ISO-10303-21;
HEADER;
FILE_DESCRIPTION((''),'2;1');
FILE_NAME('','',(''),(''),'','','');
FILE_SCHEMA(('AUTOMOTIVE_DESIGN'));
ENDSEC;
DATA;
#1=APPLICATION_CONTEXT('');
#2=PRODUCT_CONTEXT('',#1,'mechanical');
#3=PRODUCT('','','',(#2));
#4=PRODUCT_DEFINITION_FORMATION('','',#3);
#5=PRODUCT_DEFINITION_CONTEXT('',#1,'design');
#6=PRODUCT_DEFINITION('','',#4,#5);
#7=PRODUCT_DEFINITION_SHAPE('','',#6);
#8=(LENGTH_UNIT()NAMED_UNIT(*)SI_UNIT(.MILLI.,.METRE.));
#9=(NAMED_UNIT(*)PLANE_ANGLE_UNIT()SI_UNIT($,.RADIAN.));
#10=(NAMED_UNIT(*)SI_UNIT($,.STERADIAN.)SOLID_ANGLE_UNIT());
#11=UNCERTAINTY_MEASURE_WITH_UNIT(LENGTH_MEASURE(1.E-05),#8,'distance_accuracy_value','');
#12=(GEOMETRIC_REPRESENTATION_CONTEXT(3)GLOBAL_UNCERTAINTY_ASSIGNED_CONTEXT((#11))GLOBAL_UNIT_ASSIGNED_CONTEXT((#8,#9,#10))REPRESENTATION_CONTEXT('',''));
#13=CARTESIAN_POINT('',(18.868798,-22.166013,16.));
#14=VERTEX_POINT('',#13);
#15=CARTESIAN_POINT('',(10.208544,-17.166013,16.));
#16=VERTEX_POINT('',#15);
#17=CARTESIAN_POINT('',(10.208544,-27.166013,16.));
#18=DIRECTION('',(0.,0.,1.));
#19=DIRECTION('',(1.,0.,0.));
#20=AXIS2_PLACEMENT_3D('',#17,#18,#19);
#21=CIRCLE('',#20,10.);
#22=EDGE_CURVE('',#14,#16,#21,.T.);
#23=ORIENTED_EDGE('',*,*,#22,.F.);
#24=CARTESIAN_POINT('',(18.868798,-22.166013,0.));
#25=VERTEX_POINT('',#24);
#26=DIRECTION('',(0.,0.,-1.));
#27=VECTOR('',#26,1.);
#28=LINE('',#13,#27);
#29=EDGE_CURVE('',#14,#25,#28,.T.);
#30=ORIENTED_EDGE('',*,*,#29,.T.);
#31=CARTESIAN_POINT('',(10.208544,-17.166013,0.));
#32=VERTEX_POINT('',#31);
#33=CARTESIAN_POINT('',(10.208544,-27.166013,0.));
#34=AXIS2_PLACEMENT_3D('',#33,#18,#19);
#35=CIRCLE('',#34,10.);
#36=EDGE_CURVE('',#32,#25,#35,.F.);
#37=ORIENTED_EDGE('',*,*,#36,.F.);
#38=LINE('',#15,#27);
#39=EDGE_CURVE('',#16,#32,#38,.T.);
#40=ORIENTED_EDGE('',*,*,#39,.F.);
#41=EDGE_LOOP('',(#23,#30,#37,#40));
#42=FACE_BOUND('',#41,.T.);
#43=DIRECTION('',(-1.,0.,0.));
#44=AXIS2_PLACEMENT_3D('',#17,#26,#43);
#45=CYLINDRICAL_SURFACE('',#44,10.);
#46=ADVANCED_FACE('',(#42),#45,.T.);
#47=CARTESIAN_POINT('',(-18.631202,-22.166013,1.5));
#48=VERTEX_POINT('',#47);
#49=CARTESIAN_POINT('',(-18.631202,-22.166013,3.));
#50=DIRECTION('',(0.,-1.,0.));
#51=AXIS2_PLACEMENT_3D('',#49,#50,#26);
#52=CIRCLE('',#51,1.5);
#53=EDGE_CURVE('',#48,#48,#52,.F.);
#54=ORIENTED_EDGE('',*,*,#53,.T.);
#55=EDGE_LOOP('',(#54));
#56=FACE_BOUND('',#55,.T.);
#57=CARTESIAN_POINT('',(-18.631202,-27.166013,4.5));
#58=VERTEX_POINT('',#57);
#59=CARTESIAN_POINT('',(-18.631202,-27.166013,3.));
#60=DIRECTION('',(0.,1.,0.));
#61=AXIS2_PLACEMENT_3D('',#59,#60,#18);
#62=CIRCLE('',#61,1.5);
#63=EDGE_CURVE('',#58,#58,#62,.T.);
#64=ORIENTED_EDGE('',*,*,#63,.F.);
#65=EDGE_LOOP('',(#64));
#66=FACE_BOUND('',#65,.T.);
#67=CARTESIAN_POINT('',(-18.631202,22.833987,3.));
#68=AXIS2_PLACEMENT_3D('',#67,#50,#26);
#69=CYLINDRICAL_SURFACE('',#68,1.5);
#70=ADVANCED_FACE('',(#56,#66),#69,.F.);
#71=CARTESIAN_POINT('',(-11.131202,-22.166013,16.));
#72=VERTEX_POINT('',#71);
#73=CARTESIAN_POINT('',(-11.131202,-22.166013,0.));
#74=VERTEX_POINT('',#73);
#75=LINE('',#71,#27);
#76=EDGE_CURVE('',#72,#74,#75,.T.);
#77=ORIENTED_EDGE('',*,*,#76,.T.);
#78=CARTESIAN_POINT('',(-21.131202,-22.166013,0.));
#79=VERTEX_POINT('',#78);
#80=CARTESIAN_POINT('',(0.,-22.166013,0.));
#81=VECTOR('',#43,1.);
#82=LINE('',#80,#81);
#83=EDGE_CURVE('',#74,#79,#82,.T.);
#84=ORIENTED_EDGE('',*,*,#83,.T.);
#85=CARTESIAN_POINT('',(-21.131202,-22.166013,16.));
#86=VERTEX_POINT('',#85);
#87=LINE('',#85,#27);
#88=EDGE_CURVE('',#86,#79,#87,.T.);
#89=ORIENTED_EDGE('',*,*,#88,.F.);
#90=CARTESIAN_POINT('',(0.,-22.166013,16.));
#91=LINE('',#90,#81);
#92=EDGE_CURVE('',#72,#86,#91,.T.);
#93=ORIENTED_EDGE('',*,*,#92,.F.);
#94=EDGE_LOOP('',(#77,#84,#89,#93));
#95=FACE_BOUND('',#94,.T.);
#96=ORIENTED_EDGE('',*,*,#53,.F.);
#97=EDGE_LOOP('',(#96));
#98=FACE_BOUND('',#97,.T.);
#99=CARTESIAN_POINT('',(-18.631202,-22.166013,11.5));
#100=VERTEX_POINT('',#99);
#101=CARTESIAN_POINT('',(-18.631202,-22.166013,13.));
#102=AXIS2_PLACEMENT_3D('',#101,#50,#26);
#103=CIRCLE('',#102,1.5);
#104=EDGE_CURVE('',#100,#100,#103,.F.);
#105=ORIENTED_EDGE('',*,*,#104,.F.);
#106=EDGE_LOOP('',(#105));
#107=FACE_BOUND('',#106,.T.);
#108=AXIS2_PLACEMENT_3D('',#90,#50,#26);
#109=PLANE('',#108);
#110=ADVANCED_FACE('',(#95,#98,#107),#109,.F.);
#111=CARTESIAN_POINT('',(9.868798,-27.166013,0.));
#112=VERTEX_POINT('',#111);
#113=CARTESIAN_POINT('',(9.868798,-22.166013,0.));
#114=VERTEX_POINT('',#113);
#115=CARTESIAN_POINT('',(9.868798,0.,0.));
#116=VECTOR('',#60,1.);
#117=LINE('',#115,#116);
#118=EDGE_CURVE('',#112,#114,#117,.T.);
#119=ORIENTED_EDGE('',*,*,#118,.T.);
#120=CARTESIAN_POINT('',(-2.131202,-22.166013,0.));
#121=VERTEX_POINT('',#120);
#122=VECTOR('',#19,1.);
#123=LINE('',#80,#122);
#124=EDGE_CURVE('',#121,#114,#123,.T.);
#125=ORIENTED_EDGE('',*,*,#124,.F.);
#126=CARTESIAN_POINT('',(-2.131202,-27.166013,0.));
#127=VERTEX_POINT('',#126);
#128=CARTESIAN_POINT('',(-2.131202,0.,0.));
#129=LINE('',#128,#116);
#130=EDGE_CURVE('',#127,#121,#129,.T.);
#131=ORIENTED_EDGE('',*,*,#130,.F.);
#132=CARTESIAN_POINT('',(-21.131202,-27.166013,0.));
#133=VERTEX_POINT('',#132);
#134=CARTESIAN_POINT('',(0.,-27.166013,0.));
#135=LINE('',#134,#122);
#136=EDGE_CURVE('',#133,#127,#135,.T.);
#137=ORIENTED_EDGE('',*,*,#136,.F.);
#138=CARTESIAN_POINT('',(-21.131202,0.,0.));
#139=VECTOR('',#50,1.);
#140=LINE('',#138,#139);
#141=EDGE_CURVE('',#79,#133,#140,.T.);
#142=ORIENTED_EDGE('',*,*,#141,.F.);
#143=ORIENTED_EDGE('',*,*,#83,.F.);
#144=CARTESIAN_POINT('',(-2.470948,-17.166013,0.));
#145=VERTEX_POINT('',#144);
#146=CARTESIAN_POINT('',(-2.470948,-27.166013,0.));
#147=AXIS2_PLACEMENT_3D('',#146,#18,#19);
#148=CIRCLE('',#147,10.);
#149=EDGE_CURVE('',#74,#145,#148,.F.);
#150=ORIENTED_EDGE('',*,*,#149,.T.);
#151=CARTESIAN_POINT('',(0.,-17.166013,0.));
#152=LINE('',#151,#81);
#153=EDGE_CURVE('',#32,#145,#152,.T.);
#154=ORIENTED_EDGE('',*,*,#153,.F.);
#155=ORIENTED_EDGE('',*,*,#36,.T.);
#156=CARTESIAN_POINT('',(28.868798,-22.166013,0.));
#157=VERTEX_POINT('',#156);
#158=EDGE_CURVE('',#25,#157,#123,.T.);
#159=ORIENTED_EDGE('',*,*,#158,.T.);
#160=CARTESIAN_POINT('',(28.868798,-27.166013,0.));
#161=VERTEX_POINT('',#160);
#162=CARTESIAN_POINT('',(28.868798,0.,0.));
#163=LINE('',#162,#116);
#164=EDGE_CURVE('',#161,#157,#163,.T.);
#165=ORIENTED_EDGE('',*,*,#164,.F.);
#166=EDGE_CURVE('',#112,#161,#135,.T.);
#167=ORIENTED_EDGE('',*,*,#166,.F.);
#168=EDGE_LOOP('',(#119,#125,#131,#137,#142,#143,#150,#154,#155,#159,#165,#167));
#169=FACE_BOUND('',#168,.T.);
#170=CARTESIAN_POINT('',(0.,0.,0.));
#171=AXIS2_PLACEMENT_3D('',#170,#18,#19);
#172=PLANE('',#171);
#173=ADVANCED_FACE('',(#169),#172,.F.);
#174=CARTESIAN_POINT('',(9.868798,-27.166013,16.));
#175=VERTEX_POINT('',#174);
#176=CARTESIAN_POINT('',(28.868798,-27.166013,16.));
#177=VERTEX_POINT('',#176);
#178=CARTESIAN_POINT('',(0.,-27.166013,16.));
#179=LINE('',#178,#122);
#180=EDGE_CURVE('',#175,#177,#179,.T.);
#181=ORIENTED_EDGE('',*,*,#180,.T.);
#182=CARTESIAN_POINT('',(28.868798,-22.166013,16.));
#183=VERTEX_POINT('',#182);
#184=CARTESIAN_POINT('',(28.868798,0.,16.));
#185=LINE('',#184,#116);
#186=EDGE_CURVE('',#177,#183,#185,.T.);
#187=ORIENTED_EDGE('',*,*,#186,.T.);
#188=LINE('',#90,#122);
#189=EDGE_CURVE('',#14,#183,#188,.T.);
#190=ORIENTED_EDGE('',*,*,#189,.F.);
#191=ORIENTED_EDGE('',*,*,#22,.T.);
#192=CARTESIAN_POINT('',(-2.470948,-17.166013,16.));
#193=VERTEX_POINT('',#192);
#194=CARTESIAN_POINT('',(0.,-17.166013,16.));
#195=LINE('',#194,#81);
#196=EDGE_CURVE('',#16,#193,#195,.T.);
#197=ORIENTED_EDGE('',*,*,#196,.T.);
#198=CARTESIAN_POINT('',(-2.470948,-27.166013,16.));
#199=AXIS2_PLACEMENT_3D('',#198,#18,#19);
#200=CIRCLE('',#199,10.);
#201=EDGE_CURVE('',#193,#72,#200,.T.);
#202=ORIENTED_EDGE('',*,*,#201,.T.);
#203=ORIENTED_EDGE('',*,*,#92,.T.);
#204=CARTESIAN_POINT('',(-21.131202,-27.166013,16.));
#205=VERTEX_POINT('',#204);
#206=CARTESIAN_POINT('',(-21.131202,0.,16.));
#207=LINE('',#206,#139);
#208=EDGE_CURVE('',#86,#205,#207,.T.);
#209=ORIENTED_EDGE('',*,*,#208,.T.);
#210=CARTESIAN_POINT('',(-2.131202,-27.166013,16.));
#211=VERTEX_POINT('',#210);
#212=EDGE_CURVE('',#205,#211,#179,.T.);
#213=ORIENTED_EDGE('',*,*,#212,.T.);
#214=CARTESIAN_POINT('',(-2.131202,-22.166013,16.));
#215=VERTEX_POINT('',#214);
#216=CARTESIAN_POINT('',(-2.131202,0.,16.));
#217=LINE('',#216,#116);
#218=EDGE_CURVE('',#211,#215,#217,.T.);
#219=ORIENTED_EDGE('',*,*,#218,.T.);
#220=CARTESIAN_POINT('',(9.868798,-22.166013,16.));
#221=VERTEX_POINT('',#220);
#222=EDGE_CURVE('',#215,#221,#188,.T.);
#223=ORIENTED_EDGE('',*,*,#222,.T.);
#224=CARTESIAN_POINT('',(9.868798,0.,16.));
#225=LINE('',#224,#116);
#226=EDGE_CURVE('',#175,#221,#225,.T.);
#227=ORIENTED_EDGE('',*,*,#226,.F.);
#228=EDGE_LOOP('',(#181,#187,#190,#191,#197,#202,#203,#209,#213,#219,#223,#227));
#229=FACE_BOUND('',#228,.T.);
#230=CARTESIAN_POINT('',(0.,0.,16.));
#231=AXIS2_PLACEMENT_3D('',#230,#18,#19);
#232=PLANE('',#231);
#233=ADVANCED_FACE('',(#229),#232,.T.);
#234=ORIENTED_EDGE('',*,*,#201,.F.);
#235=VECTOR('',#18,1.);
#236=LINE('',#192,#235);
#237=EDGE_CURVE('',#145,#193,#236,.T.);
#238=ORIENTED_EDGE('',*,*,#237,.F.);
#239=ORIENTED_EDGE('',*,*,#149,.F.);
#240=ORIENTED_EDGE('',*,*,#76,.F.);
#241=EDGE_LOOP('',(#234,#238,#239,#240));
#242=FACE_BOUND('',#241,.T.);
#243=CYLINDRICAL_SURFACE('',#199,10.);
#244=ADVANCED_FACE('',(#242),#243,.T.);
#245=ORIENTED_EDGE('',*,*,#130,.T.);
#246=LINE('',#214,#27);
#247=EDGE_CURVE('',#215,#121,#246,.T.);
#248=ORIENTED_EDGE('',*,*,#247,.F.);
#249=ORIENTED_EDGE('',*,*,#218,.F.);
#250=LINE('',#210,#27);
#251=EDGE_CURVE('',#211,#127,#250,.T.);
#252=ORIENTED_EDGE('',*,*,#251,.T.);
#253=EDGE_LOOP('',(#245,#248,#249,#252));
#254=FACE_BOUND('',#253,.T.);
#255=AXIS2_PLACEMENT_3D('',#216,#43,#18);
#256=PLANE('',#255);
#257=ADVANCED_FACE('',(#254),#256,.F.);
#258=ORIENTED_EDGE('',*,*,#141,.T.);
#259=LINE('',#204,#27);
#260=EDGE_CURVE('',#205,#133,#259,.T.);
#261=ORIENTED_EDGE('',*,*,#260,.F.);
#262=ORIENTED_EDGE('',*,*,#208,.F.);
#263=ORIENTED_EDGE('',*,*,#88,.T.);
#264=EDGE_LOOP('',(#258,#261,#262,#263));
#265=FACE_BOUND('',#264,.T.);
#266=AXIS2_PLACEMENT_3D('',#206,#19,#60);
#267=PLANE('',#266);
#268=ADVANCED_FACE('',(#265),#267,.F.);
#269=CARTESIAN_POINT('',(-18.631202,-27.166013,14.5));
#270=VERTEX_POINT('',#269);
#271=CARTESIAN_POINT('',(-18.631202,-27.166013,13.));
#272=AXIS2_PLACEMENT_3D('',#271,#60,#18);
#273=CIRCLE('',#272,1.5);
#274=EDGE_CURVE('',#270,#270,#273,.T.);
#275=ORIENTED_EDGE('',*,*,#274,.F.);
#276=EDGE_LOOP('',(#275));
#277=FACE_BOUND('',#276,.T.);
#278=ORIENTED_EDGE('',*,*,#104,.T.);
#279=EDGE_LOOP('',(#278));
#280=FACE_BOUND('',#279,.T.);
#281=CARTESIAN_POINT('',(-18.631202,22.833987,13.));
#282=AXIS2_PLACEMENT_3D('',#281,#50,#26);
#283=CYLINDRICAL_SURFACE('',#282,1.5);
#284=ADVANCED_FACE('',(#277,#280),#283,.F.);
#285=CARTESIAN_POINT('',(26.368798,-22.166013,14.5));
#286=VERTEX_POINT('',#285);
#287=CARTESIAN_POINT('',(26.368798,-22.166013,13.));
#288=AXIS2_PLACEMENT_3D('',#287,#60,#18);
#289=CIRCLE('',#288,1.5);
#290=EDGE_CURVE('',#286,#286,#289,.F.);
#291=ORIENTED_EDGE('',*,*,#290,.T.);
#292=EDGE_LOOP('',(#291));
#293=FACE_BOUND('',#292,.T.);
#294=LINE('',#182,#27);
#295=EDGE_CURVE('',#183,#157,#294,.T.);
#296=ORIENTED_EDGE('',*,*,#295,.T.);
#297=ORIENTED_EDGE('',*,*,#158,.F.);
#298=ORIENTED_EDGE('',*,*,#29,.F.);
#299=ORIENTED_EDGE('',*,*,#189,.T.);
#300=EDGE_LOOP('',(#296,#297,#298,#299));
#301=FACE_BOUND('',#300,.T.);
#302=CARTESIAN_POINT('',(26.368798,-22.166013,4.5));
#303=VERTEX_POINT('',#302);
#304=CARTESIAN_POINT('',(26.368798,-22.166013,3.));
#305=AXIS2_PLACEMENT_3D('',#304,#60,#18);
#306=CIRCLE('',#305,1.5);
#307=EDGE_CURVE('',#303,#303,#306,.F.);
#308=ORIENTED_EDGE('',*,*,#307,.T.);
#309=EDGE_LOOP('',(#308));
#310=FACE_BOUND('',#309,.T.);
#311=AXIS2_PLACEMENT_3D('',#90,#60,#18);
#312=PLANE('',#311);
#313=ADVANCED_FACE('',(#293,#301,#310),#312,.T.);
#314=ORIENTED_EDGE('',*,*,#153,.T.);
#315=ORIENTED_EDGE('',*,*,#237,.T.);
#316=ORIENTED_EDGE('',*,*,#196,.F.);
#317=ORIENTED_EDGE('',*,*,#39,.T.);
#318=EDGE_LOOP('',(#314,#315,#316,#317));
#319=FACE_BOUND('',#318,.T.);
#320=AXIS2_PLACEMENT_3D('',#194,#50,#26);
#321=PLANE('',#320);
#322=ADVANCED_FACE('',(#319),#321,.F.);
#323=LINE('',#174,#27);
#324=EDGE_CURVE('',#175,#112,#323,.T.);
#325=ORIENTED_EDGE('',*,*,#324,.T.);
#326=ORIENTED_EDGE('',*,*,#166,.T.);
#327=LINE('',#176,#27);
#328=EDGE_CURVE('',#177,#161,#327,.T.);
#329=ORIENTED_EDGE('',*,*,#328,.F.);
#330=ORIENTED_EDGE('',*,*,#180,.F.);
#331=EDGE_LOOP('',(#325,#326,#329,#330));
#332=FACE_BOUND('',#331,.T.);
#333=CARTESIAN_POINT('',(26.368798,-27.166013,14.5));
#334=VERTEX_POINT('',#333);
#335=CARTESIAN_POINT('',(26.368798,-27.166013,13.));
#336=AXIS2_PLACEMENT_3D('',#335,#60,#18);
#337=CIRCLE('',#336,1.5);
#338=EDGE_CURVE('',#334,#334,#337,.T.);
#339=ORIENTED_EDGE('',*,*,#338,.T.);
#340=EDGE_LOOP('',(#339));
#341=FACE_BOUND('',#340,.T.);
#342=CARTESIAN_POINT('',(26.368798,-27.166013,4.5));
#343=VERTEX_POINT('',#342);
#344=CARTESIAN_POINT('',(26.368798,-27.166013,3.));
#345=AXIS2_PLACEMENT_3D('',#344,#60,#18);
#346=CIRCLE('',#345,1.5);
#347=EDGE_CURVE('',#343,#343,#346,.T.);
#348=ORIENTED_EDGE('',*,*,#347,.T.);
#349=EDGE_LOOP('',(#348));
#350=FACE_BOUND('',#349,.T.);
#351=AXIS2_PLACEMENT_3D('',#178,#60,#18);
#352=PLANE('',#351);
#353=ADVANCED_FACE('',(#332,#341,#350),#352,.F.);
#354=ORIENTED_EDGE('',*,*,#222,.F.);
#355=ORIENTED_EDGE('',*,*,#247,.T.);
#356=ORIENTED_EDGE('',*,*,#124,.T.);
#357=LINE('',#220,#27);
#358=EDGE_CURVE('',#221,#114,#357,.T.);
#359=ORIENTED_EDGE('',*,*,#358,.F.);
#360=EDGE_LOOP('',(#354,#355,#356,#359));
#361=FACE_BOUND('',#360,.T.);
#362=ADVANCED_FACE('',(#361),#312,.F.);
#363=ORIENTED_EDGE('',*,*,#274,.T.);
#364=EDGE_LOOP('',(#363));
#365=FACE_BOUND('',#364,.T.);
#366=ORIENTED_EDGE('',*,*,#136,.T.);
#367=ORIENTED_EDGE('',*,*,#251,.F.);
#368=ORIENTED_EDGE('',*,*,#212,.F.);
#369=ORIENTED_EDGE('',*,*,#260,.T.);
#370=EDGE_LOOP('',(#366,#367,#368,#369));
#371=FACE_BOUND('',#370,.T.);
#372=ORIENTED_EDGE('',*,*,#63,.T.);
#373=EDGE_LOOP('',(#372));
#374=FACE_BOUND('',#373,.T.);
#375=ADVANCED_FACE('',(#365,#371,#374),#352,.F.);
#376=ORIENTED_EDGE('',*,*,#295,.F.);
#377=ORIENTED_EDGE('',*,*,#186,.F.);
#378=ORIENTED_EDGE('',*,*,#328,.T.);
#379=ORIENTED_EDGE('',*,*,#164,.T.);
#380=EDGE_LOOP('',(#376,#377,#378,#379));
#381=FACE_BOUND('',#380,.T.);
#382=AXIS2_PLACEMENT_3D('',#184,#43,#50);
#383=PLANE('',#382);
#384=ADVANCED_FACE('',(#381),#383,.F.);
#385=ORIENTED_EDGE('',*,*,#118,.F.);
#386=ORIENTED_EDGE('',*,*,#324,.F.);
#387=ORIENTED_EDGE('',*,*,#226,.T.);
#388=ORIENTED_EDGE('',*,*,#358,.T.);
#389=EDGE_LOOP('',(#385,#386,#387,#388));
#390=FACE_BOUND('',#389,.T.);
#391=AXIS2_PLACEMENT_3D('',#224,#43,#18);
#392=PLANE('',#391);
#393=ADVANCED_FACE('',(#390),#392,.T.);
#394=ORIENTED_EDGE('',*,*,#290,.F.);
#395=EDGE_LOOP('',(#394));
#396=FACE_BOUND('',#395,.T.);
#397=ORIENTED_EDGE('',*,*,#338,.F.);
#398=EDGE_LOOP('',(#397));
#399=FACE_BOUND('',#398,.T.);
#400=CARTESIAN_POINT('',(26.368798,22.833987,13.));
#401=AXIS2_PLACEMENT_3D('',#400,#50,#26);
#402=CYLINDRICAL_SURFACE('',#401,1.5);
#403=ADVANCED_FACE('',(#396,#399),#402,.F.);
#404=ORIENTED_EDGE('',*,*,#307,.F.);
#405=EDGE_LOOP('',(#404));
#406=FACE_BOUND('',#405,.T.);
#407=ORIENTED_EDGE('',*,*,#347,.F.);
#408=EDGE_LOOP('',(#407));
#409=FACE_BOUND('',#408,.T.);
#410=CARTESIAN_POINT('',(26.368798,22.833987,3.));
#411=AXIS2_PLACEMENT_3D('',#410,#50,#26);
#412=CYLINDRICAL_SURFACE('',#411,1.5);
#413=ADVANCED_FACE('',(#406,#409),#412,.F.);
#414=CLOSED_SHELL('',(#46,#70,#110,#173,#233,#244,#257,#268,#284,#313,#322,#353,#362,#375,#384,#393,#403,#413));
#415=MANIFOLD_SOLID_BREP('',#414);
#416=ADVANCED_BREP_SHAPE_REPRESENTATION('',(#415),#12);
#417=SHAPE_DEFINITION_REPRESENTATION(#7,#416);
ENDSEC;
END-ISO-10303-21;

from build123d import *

# Parameters (mm, degrees)
BOSS_EXTRUDE1_DEPTH = 16
SKETCH14_R          = 1.5
CUT_EXTRUDE13_DEPTH = 50
FILLET1_R           = 10


with BuildPart() as part:
    # Sketch7 → Boss-Extrude1 (new body)
    with BuildSketch(Plane.XY):
        Polygon((9.868798372, -27.16601268), (9.868798372, -22.16601268), (-2.131201628, -22.16601268), (-2.131201628, -27.16601268), (-8.131201628, -27.16601268), (-21.131201628, -27.16601268), (-21.131201628, -22.16601268), (-11.131201628, -22.16601268), (-11.131201628, -17.16601268), (18.868798372, -17.16601268), (18.868798372, -22.16601268), (28.868798372, -22.16601268), (28.868798372, -27.16601268), (15.868798372, -27.16601268), align=None)
    extrude(amount=BOSS_EXTRUDE1_DEPTH)

    # Sketch14 → Cut-Extrude13 (cut)
    with BuildSketch(Plane(origin=(0, -27.16601268, 0), x_dir=(1, 0, 0), z_dir=(0, 1, 0))):
        with Locations(Location((-18.631201628, -3, 0), (0, 0, 90))):
            Circle(SKETCH14_R)
        with Locations(Location((-18.631201628, -13, 0), (0, 0, 90))):
            Circle(SKETCH14_R)
        with Locations(Location((26.368798372, -3, 0), (0, 0, 270))):
            Circle(SKETCH14_R)
        with Locations(Location((26.368798372, -13, 0), (0, 0, 270))):
            Circle(SKETCH14_R)
    extrude(amount=CUT_EXTRUDE13_DEPTH, mode=Mode.SUBTRACT)

    # Fillet1
    # the kernel refuses this fillet: 10 mm, written as the material it takes off along each edge
    with BuildSketch(Plane(origin=(-11.131201628, -17.16601268, -21.650635095), x_dir=(0, -1, 0), z_dir=(0, 0, 1))) as fillet1_piece_1:
        with BuildLine():
            CenterArc((10, 8.660254038), FILLET1_R, 180, 60)
            Line((0, 8.660254038), (-0.2, 8.660254038))
            Line((-0.2, 8.660254038), (-0.2, 0))
            Line((-0.2, 0), (0, -0.2))
            ThreePointArc((0, -0.2), (2.5, -0.2), (4.9, -0.173205081))
            Line((4.9, -0.173205081), (5, 0))
        make_face()
    extrude(amount=59.301270189, mode=Mode.SUBTRACT)
    with BuildSketch(Plane(origin=(18.868798372, -17.16601268, -21.650635095), x_dir=(-1, 0, 0), z_dir=(0, 0, 1))) as fillet1_piece_2:
        with BuildLine():
            CenterArc((8.660254038, 10), FILLET1_R, 210, 60)
            Line((0, 5), (-0.173205081, 4.9))
            ThreePointArc((-0.173205081, 4.9), (-0.2, 2.5), (-0.2, 0))
            Line((-0.2, 0), (0, -0.2))
            Line((0, -0.2), (8.660254038, -0.2))
            Line((8.660254038, -0.2), (8.660254038, 0))
        make_face()
    extrude(amount=59.301270189, mode=Mode.SUBTRACT)


solid = part.part
